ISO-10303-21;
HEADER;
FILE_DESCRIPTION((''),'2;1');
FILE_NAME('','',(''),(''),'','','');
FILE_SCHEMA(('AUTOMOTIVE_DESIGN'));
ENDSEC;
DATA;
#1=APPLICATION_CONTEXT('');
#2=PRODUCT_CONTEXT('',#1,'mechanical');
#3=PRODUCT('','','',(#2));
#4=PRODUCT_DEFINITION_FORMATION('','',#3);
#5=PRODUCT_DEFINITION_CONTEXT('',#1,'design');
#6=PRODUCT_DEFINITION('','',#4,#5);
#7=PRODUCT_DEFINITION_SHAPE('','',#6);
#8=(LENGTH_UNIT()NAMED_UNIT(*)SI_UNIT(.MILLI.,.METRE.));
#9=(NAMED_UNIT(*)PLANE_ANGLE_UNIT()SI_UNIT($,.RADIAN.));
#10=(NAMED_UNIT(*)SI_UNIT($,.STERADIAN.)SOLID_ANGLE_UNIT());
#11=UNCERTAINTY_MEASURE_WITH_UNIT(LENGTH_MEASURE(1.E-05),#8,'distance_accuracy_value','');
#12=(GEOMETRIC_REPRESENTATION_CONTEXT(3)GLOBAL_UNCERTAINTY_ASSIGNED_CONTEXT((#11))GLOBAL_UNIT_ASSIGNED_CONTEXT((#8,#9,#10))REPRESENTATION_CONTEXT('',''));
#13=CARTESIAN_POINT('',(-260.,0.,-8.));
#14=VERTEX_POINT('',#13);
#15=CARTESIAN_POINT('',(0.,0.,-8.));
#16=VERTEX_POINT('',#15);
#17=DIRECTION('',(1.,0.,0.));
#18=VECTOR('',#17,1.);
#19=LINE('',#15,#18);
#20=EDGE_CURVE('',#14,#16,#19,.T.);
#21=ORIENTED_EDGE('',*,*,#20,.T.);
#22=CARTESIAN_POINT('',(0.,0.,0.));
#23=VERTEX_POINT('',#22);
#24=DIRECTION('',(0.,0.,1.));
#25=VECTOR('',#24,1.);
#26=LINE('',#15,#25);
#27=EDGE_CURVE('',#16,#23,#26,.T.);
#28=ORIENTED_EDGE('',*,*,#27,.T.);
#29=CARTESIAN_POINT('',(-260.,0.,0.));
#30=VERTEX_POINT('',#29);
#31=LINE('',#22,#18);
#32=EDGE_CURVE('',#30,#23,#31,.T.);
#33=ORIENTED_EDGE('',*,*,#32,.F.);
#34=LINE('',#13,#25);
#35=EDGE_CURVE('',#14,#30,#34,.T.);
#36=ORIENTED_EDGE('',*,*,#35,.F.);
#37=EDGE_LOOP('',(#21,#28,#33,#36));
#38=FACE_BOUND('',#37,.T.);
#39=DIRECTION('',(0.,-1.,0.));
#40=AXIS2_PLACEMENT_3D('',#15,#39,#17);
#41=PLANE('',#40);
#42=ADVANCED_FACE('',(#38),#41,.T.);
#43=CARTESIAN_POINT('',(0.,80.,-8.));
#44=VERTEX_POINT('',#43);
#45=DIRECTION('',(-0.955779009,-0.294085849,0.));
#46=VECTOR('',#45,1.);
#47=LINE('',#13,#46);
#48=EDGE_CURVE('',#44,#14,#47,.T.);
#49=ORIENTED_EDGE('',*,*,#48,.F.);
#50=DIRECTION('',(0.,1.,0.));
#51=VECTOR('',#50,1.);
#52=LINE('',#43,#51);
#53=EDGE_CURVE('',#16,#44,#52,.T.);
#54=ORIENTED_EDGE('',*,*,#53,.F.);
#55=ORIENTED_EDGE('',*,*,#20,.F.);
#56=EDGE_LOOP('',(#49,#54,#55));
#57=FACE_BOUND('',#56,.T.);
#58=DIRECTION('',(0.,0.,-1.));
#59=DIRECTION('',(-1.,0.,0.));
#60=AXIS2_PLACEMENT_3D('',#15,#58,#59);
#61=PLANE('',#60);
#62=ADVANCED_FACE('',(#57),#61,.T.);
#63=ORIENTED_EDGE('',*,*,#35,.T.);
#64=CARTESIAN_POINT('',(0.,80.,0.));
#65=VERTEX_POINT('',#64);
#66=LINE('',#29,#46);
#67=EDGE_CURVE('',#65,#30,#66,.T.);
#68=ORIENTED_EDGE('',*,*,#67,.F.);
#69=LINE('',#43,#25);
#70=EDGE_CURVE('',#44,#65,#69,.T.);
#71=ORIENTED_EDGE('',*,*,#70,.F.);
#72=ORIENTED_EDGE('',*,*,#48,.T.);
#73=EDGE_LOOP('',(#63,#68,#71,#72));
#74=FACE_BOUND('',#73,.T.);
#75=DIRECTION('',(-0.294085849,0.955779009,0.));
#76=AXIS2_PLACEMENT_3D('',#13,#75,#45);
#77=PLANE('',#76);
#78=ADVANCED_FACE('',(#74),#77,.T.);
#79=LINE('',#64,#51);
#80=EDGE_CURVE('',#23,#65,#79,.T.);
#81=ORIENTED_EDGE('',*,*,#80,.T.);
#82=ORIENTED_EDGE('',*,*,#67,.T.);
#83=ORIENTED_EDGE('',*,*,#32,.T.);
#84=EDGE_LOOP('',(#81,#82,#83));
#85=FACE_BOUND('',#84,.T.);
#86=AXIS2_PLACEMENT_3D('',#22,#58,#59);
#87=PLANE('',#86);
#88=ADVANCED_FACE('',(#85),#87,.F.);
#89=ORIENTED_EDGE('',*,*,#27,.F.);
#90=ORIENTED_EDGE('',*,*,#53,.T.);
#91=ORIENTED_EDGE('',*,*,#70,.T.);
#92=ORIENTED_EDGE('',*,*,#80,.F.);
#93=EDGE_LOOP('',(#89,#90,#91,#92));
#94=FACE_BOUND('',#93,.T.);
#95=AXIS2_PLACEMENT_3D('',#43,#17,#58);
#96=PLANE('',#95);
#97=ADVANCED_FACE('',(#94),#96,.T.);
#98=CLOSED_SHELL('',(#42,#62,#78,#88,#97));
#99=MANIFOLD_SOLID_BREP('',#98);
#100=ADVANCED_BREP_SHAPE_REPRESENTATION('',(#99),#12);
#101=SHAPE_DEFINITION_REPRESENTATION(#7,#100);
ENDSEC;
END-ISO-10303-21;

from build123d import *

# Parameters (mm, degrees)
TABAN_FLAN_1_DEPTH = 8


# Sheet-metal steps are written as plain solids
with BuildPart() as part:
    # Çizim1 → Taban-Flanş1 (new body)
    with BuildSketch(Plane.XY):
        Polygon((0, 0), (-260, 0), (0, 80), align=None)
    extrude(amount=-TABAN_FLAN_1_DEPTH)


solid = part.part
